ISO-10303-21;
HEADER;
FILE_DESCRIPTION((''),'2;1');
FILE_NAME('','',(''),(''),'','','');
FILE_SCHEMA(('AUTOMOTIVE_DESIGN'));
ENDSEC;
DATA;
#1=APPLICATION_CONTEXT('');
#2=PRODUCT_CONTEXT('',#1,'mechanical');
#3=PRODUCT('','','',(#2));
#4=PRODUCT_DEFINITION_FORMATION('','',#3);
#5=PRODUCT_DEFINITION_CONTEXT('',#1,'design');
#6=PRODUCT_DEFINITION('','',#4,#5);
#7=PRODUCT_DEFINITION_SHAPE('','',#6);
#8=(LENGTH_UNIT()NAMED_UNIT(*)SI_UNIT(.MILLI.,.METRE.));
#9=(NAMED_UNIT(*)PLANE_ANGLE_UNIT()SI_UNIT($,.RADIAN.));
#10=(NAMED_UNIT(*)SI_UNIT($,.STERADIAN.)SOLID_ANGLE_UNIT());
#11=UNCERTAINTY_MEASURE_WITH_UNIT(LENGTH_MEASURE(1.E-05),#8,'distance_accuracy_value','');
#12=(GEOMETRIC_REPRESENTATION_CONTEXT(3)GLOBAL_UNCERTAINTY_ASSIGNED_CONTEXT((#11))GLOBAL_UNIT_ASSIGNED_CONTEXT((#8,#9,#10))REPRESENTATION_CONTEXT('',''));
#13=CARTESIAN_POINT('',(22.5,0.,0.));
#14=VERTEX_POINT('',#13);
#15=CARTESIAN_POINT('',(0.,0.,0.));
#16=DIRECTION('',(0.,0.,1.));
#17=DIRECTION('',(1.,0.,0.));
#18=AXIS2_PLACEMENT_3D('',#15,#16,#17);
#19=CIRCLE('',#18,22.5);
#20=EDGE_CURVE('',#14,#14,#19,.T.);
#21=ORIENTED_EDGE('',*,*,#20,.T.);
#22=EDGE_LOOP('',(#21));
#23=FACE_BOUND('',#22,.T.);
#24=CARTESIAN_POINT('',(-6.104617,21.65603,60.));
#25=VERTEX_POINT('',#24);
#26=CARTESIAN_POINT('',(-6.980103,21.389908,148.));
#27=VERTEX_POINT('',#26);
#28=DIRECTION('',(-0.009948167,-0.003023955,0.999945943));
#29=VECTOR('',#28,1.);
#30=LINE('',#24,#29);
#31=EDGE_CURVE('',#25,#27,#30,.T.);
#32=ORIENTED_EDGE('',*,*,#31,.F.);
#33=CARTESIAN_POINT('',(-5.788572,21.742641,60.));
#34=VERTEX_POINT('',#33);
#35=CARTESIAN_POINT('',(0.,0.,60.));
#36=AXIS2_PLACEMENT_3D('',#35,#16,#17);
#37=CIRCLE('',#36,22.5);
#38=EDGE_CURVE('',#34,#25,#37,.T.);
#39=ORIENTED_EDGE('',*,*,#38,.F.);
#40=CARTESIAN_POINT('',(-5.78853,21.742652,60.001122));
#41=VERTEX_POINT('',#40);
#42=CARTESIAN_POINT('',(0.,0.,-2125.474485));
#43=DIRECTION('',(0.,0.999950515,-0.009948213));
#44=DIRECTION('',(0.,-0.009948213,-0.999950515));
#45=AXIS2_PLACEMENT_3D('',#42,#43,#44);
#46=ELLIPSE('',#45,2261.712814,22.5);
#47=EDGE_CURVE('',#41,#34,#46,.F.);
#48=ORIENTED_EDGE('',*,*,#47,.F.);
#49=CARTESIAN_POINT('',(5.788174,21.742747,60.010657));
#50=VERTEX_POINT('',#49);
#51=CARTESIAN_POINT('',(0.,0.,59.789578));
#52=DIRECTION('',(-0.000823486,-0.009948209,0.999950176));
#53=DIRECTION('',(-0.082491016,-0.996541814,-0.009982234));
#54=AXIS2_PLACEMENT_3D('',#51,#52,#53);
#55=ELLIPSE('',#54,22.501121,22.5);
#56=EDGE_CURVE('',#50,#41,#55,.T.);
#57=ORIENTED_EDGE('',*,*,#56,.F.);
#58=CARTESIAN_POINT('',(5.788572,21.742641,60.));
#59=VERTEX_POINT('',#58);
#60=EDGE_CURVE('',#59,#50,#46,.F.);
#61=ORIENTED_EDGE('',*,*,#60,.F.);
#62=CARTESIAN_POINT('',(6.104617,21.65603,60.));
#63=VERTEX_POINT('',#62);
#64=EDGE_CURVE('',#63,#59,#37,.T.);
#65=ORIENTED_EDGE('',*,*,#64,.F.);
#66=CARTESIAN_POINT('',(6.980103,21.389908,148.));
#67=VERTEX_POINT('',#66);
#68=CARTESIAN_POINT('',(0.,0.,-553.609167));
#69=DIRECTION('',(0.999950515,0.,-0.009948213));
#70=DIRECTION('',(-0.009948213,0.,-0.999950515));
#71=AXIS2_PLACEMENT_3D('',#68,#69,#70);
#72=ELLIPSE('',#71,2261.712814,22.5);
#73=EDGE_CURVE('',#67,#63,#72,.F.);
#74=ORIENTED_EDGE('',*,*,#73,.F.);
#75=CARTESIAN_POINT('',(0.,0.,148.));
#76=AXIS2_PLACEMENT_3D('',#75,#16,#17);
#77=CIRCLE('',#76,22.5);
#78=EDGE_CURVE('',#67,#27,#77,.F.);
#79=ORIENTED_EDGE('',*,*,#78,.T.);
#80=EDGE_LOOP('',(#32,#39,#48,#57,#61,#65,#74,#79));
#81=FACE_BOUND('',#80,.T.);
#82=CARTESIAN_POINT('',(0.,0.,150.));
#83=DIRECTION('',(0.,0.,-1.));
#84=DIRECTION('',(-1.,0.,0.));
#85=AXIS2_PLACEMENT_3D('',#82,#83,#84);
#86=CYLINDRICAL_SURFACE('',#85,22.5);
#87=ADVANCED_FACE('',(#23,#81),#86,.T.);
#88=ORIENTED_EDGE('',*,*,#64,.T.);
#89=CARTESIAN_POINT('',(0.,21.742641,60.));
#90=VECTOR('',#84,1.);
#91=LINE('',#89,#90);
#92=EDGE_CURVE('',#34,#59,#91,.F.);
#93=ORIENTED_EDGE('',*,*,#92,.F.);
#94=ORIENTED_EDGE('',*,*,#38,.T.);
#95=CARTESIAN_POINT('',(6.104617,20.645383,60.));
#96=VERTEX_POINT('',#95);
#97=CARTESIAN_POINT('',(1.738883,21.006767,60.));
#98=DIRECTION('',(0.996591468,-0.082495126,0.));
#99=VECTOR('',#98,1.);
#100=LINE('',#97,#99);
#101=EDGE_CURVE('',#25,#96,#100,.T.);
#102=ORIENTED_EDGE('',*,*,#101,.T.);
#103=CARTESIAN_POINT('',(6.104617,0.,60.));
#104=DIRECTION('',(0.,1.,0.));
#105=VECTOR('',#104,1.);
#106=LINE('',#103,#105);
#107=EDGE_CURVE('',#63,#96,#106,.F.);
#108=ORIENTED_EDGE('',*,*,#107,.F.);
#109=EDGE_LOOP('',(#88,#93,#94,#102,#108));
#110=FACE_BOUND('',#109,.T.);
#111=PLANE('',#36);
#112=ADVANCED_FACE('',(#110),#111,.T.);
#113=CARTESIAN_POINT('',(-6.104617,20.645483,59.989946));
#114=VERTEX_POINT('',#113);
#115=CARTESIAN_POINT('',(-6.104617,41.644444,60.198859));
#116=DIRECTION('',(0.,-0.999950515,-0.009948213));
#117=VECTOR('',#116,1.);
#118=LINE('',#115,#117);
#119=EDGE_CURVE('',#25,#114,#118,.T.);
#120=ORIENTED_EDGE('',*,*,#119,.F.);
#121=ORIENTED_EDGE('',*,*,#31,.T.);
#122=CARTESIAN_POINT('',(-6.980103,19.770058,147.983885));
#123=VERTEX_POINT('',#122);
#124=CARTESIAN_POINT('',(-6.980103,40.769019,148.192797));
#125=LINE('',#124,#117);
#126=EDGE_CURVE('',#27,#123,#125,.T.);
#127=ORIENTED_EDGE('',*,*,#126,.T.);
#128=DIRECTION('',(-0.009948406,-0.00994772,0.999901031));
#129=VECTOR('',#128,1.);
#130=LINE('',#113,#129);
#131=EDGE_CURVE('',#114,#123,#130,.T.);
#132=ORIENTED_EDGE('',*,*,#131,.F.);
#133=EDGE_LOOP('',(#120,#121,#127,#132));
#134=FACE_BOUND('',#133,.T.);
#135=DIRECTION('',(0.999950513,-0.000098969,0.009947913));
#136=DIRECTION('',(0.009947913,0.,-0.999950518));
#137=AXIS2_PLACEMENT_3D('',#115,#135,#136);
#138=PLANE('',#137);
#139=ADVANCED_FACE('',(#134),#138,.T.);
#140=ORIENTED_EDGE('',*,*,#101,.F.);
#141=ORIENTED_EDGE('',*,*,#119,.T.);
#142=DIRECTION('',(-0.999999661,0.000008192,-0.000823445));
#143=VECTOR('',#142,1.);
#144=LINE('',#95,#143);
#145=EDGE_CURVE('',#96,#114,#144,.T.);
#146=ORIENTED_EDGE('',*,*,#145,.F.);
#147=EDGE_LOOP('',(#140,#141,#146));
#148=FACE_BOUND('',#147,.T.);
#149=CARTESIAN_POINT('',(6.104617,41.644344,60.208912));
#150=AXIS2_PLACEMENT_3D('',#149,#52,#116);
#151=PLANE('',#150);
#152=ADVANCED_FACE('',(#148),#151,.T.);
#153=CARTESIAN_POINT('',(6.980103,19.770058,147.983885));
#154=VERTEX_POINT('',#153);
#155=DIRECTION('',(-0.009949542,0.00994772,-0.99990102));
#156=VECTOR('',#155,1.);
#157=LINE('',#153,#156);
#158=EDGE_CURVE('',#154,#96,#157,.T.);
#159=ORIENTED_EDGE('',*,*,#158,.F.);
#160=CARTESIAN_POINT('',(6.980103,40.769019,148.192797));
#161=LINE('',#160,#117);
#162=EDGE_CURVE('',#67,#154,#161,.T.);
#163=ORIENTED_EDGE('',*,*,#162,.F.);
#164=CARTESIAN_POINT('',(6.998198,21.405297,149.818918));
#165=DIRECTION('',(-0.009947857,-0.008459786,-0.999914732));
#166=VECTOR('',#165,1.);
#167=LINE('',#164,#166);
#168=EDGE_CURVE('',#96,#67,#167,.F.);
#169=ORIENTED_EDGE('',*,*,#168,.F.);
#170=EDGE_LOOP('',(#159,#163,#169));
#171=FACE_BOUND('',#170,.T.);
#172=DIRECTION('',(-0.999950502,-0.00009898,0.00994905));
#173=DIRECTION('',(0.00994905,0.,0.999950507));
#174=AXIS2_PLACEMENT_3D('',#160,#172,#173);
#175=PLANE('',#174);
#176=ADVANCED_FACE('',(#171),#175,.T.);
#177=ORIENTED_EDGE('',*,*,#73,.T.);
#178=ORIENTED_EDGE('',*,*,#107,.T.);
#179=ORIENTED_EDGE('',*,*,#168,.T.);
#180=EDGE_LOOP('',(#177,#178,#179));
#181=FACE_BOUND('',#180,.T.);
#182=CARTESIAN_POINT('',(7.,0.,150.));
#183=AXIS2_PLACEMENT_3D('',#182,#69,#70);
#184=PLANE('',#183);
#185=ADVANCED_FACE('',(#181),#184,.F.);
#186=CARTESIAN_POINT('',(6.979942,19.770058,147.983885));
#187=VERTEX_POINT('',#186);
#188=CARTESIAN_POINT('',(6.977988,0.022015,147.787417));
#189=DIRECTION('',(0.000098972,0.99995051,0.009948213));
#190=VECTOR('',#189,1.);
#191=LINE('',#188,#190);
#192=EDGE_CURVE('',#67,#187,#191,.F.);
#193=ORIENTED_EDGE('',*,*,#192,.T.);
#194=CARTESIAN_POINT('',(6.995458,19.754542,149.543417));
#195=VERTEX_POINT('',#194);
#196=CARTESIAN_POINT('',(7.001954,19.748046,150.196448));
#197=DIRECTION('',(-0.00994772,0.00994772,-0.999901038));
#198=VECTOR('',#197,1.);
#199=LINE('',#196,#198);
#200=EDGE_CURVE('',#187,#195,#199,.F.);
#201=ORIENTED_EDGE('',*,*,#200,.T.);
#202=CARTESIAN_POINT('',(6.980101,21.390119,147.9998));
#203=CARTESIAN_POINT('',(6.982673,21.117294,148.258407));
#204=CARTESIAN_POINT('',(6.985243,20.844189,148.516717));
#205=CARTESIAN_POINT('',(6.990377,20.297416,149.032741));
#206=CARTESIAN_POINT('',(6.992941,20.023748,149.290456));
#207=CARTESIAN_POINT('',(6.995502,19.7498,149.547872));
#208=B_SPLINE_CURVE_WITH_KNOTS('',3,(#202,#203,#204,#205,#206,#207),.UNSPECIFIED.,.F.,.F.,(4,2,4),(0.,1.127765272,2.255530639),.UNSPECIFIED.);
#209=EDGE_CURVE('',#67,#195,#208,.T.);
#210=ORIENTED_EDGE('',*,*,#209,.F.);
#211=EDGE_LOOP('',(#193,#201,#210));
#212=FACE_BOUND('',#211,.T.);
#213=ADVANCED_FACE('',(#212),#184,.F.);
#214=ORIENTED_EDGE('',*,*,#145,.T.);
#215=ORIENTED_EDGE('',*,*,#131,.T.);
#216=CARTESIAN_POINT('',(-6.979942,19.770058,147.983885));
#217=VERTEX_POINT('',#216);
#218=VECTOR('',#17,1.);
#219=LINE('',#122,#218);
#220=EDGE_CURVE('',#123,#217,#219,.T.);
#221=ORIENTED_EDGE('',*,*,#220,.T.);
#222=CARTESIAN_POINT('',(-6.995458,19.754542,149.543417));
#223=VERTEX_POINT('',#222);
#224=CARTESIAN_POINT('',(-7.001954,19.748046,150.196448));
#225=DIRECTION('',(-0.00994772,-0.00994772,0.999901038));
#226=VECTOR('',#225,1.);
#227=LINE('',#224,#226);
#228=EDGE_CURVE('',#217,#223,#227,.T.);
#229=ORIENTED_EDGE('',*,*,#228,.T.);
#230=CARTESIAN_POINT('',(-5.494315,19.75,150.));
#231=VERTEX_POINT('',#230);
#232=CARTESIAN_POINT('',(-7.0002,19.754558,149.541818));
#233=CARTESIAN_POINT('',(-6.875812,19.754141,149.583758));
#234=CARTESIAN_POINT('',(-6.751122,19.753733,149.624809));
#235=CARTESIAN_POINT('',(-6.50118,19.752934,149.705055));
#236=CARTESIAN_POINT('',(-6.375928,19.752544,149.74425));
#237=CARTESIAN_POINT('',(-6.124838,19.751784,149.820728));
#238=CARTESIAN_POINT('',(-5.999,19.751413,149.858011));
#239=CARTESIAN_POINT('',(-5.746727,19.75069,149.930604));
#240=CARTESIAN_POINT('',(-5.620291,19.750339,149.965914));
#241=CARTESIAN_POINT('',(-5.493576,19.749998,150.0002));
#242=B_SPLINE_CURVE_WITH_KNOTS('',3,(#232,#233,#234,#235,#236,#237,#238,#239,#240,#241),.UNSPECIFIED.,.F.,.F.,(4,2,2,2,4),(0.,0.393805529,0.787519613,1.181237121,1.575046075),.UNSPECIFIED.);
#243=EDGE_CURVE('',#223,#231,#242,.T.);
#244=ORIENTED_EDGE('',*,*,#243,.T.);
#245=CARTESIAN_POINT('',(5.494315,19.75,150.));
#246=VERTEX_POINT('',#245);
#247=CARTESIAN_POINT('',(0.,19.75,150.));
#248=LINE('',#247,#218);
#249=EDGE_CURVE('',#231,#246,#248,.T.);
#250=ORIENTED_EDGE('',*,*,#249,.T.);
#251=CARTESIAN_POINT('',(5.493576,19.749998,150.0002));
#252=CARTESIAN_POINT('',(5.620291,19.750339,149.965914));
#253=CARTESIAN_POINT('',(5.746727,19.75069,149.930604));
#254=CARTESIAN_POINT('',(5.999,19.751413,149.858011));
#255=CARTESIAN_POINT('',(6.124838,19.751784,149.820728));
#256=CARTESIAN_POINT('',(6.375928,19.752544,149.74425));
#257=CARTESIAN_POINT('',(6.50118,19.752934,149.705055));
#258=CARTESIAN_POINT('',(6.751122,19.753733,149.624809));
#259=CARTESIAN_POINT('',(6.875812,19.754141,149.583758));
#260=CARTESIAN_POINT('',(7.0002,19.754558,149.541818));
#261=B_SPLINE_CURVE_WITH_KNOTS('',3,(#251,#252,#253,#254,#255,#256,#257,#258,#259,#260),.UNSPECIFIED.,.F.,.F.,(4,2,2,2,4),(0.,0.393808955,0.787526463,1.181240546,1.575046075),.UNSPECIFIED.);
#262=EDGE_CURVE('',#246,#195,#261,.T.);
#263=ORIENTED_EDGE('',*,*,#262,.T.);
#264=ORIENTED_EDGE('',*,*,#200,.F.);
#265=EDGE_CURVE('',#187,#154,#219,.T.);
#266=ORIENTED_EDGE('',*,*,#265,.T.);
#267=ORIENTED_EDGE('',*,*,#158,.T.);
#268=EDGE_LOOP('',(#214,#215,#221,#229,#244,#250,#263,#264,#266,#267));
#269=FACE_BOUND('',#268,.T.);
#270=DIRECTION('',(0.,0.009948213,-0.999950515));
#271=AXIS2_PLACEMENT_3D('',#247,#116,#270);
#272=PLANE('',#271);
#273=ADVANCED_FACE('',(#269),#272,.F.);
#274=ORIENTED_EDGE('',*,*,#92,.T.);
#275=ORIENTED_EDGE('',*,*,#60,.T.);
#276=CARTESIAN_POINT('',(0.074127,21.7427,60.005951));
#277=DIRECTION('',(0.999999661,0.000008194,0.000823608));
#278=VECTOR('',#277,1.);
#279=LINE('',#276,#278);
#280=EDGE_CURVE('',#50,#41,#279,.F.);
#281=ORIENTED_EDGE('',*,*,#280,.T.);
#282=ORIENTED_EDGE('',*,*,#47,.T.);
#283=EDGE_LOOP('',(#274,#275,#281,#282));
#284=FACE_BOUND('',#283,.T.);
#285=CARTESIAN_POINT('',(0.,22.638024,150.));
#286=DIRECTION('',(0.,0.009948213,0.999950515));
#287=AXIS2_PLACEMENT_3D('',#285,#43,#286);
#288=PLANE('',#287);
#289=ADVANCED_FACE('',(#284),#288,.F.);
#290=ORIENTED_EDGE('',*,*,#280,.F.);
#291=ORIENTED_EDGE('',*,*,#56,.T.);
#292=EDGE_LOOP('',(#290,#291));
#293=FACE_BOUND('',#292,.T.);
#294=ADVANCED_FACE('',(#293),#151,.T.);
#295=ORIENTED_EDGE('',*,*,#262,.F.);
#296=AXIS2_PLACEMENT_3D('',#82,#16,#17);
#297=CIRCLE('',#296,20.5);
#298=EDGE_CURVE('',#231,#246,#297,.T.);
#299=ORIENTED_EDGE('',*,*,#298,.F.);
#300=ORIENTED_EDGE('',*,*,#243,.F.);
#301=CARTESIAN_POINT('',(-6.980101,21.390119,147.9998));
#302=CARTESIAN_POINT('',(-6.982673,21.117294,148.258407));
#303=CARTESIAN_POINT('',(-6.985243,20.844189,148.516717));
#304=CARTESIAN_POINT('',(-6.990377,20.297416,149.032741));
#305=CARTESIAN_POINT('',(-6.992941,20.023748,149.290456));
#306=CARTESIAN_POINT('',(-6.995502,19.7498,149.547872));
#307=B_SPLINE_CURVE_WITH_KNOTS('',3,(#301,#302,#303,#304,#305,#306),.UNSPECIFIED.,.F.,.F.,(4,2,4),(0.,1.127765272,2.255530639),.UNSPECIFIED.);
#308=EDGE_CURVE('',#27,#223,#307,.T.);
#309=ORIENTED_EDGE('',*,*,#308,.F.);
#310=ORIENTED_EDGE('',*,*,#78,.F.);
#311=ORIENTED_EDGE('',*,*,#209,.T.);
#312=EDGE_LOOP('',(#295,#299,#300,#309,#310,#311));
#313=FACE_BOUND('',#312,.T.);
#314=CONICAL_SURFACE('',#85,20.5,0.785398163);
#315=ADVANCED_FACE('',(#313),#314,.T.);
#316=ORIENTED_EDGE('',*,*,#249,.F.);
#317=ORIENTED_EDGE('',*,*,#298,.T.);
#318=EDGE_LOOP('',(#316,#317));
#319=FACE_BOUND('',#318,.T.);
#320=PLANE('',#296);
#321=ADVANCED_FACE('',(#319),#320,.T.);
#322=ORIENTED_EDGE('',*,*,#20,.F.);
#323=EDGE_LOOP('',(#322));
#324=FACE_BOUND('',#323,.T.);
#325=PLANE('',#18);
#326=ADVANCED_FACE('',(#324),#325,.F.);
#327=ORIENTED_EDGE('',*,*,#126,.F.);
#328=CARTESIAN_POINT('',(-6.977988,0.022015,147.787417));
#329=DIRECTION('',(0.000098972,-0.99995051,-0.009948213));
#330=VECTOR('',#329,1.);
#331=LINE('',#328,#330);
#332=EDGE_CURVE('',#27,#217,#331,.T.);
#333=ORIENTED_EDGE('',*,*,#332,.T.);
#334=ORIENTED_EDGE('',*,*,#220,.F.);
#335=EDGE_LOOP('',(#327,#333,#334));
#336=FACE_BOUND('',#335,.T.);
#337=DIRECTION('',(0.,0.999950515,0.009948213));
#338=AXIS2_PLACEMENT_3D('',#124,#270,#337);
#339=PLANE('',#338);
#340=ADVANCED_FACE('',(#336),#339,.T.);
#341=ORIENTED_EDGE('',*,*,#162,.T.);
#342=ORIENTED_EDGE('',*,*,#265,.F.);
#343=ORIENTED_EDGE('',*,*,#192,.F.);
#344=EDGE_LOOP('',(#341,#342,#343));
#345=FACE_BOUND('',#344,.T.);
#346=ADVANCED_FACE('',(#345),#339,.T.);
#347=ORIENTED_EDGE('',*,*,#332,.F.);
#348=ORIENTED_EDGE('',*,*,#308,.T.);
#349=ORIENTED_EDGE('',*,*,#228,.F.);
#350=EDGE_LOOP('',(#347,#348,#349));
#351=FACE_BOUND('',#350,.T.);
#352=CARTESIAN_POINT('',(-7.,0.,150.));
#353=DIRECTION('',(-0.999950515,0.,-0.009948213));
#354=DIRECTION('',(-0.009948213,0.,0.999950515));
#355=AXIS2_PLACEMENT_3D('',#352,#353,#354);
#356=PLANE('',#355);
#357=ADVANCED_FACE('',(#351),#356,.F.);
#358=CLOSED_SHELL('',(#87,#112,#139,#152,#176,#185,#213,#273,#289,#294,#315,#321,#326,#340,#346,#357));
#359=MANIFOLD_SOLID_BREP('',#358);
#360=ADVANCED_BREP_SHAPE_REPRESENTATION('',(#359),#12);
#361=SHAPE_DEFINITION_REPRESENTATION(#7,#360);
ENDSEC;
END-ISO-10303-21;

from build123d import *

# Parameters (mm, degrees)
SKETCH1_R           = 22.5
BOSS_EXTRUDE1_DEPTH = 150
CHAMFER1_SIZE       = 2
SKETCH3_W           = 14
SKETCH3_H           = 2.888024264
CUT_EXTRUDE6_DEPTH  = 90
CUT_EXTRUDE6_DRAFT  = -0.57
CUT_EXTRUDE7_DEPTH  = 21


with BuildPart() as part:
    # Sketch1 → Boss-Extrude1 (new body)
    with BuildSketch(Plane.XY):
        Circle(SKETCH1_R)
    extrude(amount=BOSS_EXTRUDE1_DEPTH)

    # Chamfer1
    chamfer1_edges = [part.edges().sort_by_distance(p)[0] for p in [
        (-22.5, 0, 150),
    ]]
    chamfer(chamfer1_edges, length=CHAMFER1_SIZE)


with BuildPart() as cut_extrude6_tool:
    # Sketch3 → Cut-Extrude6 (with draft: the straight prism first)
    with BuildSketch(Plane.XY.offset(150)):
        with Locations((0, 21.194012132)):
            Rectangle(SKETCH3_W, SKETCH3_H)
    extrude(amount=-CUT_EXTRUDE6_DEPTH)
    # Cut-Extrude6: the draft: its side faces are tilted about the plane it starts from
    cut_extrude6_sides = [cut_extrude6_tool.faces().sort_by_distance(p)[0] for p in [
        (7, 21.194012132, 105),
        (0, 22.638024264, 105),
        (-7, 21.194012132, 105),
        (0, 19.75, 105),
    ]]
    draft(cut_extrude6_sides, Plane.XY.offset(150), CUT_EXTRUDE6_DRAFT)


with BuildPart() as part_1:
    add(part.part)

    # Cut-Extrude6: cut by cut_extrude6_tool
    add(cut_extrude6_tool.part, mode=Mode.SUBTRACT)

    # Sketch6 → Cut-Extrude7 (cut)
    with BuildSketch(Plane(origin=(0, 21.240203456, 0.211312517), x_dir=(1, 0, 0), z_dir=(0, 0.9999505153082836, 0.009948212638374379))):
        Polygon((-6.98010259, -147.779884912), (6.98010259, -147.779884912), (6.104616555, -59.791646254), (-6.104616555, -59.781592122), align=None)
    extrude(amount=CUT_EXTRUDE7_DEPTH, mode=Mode.SUBTRACT)


solid = part_1.part
